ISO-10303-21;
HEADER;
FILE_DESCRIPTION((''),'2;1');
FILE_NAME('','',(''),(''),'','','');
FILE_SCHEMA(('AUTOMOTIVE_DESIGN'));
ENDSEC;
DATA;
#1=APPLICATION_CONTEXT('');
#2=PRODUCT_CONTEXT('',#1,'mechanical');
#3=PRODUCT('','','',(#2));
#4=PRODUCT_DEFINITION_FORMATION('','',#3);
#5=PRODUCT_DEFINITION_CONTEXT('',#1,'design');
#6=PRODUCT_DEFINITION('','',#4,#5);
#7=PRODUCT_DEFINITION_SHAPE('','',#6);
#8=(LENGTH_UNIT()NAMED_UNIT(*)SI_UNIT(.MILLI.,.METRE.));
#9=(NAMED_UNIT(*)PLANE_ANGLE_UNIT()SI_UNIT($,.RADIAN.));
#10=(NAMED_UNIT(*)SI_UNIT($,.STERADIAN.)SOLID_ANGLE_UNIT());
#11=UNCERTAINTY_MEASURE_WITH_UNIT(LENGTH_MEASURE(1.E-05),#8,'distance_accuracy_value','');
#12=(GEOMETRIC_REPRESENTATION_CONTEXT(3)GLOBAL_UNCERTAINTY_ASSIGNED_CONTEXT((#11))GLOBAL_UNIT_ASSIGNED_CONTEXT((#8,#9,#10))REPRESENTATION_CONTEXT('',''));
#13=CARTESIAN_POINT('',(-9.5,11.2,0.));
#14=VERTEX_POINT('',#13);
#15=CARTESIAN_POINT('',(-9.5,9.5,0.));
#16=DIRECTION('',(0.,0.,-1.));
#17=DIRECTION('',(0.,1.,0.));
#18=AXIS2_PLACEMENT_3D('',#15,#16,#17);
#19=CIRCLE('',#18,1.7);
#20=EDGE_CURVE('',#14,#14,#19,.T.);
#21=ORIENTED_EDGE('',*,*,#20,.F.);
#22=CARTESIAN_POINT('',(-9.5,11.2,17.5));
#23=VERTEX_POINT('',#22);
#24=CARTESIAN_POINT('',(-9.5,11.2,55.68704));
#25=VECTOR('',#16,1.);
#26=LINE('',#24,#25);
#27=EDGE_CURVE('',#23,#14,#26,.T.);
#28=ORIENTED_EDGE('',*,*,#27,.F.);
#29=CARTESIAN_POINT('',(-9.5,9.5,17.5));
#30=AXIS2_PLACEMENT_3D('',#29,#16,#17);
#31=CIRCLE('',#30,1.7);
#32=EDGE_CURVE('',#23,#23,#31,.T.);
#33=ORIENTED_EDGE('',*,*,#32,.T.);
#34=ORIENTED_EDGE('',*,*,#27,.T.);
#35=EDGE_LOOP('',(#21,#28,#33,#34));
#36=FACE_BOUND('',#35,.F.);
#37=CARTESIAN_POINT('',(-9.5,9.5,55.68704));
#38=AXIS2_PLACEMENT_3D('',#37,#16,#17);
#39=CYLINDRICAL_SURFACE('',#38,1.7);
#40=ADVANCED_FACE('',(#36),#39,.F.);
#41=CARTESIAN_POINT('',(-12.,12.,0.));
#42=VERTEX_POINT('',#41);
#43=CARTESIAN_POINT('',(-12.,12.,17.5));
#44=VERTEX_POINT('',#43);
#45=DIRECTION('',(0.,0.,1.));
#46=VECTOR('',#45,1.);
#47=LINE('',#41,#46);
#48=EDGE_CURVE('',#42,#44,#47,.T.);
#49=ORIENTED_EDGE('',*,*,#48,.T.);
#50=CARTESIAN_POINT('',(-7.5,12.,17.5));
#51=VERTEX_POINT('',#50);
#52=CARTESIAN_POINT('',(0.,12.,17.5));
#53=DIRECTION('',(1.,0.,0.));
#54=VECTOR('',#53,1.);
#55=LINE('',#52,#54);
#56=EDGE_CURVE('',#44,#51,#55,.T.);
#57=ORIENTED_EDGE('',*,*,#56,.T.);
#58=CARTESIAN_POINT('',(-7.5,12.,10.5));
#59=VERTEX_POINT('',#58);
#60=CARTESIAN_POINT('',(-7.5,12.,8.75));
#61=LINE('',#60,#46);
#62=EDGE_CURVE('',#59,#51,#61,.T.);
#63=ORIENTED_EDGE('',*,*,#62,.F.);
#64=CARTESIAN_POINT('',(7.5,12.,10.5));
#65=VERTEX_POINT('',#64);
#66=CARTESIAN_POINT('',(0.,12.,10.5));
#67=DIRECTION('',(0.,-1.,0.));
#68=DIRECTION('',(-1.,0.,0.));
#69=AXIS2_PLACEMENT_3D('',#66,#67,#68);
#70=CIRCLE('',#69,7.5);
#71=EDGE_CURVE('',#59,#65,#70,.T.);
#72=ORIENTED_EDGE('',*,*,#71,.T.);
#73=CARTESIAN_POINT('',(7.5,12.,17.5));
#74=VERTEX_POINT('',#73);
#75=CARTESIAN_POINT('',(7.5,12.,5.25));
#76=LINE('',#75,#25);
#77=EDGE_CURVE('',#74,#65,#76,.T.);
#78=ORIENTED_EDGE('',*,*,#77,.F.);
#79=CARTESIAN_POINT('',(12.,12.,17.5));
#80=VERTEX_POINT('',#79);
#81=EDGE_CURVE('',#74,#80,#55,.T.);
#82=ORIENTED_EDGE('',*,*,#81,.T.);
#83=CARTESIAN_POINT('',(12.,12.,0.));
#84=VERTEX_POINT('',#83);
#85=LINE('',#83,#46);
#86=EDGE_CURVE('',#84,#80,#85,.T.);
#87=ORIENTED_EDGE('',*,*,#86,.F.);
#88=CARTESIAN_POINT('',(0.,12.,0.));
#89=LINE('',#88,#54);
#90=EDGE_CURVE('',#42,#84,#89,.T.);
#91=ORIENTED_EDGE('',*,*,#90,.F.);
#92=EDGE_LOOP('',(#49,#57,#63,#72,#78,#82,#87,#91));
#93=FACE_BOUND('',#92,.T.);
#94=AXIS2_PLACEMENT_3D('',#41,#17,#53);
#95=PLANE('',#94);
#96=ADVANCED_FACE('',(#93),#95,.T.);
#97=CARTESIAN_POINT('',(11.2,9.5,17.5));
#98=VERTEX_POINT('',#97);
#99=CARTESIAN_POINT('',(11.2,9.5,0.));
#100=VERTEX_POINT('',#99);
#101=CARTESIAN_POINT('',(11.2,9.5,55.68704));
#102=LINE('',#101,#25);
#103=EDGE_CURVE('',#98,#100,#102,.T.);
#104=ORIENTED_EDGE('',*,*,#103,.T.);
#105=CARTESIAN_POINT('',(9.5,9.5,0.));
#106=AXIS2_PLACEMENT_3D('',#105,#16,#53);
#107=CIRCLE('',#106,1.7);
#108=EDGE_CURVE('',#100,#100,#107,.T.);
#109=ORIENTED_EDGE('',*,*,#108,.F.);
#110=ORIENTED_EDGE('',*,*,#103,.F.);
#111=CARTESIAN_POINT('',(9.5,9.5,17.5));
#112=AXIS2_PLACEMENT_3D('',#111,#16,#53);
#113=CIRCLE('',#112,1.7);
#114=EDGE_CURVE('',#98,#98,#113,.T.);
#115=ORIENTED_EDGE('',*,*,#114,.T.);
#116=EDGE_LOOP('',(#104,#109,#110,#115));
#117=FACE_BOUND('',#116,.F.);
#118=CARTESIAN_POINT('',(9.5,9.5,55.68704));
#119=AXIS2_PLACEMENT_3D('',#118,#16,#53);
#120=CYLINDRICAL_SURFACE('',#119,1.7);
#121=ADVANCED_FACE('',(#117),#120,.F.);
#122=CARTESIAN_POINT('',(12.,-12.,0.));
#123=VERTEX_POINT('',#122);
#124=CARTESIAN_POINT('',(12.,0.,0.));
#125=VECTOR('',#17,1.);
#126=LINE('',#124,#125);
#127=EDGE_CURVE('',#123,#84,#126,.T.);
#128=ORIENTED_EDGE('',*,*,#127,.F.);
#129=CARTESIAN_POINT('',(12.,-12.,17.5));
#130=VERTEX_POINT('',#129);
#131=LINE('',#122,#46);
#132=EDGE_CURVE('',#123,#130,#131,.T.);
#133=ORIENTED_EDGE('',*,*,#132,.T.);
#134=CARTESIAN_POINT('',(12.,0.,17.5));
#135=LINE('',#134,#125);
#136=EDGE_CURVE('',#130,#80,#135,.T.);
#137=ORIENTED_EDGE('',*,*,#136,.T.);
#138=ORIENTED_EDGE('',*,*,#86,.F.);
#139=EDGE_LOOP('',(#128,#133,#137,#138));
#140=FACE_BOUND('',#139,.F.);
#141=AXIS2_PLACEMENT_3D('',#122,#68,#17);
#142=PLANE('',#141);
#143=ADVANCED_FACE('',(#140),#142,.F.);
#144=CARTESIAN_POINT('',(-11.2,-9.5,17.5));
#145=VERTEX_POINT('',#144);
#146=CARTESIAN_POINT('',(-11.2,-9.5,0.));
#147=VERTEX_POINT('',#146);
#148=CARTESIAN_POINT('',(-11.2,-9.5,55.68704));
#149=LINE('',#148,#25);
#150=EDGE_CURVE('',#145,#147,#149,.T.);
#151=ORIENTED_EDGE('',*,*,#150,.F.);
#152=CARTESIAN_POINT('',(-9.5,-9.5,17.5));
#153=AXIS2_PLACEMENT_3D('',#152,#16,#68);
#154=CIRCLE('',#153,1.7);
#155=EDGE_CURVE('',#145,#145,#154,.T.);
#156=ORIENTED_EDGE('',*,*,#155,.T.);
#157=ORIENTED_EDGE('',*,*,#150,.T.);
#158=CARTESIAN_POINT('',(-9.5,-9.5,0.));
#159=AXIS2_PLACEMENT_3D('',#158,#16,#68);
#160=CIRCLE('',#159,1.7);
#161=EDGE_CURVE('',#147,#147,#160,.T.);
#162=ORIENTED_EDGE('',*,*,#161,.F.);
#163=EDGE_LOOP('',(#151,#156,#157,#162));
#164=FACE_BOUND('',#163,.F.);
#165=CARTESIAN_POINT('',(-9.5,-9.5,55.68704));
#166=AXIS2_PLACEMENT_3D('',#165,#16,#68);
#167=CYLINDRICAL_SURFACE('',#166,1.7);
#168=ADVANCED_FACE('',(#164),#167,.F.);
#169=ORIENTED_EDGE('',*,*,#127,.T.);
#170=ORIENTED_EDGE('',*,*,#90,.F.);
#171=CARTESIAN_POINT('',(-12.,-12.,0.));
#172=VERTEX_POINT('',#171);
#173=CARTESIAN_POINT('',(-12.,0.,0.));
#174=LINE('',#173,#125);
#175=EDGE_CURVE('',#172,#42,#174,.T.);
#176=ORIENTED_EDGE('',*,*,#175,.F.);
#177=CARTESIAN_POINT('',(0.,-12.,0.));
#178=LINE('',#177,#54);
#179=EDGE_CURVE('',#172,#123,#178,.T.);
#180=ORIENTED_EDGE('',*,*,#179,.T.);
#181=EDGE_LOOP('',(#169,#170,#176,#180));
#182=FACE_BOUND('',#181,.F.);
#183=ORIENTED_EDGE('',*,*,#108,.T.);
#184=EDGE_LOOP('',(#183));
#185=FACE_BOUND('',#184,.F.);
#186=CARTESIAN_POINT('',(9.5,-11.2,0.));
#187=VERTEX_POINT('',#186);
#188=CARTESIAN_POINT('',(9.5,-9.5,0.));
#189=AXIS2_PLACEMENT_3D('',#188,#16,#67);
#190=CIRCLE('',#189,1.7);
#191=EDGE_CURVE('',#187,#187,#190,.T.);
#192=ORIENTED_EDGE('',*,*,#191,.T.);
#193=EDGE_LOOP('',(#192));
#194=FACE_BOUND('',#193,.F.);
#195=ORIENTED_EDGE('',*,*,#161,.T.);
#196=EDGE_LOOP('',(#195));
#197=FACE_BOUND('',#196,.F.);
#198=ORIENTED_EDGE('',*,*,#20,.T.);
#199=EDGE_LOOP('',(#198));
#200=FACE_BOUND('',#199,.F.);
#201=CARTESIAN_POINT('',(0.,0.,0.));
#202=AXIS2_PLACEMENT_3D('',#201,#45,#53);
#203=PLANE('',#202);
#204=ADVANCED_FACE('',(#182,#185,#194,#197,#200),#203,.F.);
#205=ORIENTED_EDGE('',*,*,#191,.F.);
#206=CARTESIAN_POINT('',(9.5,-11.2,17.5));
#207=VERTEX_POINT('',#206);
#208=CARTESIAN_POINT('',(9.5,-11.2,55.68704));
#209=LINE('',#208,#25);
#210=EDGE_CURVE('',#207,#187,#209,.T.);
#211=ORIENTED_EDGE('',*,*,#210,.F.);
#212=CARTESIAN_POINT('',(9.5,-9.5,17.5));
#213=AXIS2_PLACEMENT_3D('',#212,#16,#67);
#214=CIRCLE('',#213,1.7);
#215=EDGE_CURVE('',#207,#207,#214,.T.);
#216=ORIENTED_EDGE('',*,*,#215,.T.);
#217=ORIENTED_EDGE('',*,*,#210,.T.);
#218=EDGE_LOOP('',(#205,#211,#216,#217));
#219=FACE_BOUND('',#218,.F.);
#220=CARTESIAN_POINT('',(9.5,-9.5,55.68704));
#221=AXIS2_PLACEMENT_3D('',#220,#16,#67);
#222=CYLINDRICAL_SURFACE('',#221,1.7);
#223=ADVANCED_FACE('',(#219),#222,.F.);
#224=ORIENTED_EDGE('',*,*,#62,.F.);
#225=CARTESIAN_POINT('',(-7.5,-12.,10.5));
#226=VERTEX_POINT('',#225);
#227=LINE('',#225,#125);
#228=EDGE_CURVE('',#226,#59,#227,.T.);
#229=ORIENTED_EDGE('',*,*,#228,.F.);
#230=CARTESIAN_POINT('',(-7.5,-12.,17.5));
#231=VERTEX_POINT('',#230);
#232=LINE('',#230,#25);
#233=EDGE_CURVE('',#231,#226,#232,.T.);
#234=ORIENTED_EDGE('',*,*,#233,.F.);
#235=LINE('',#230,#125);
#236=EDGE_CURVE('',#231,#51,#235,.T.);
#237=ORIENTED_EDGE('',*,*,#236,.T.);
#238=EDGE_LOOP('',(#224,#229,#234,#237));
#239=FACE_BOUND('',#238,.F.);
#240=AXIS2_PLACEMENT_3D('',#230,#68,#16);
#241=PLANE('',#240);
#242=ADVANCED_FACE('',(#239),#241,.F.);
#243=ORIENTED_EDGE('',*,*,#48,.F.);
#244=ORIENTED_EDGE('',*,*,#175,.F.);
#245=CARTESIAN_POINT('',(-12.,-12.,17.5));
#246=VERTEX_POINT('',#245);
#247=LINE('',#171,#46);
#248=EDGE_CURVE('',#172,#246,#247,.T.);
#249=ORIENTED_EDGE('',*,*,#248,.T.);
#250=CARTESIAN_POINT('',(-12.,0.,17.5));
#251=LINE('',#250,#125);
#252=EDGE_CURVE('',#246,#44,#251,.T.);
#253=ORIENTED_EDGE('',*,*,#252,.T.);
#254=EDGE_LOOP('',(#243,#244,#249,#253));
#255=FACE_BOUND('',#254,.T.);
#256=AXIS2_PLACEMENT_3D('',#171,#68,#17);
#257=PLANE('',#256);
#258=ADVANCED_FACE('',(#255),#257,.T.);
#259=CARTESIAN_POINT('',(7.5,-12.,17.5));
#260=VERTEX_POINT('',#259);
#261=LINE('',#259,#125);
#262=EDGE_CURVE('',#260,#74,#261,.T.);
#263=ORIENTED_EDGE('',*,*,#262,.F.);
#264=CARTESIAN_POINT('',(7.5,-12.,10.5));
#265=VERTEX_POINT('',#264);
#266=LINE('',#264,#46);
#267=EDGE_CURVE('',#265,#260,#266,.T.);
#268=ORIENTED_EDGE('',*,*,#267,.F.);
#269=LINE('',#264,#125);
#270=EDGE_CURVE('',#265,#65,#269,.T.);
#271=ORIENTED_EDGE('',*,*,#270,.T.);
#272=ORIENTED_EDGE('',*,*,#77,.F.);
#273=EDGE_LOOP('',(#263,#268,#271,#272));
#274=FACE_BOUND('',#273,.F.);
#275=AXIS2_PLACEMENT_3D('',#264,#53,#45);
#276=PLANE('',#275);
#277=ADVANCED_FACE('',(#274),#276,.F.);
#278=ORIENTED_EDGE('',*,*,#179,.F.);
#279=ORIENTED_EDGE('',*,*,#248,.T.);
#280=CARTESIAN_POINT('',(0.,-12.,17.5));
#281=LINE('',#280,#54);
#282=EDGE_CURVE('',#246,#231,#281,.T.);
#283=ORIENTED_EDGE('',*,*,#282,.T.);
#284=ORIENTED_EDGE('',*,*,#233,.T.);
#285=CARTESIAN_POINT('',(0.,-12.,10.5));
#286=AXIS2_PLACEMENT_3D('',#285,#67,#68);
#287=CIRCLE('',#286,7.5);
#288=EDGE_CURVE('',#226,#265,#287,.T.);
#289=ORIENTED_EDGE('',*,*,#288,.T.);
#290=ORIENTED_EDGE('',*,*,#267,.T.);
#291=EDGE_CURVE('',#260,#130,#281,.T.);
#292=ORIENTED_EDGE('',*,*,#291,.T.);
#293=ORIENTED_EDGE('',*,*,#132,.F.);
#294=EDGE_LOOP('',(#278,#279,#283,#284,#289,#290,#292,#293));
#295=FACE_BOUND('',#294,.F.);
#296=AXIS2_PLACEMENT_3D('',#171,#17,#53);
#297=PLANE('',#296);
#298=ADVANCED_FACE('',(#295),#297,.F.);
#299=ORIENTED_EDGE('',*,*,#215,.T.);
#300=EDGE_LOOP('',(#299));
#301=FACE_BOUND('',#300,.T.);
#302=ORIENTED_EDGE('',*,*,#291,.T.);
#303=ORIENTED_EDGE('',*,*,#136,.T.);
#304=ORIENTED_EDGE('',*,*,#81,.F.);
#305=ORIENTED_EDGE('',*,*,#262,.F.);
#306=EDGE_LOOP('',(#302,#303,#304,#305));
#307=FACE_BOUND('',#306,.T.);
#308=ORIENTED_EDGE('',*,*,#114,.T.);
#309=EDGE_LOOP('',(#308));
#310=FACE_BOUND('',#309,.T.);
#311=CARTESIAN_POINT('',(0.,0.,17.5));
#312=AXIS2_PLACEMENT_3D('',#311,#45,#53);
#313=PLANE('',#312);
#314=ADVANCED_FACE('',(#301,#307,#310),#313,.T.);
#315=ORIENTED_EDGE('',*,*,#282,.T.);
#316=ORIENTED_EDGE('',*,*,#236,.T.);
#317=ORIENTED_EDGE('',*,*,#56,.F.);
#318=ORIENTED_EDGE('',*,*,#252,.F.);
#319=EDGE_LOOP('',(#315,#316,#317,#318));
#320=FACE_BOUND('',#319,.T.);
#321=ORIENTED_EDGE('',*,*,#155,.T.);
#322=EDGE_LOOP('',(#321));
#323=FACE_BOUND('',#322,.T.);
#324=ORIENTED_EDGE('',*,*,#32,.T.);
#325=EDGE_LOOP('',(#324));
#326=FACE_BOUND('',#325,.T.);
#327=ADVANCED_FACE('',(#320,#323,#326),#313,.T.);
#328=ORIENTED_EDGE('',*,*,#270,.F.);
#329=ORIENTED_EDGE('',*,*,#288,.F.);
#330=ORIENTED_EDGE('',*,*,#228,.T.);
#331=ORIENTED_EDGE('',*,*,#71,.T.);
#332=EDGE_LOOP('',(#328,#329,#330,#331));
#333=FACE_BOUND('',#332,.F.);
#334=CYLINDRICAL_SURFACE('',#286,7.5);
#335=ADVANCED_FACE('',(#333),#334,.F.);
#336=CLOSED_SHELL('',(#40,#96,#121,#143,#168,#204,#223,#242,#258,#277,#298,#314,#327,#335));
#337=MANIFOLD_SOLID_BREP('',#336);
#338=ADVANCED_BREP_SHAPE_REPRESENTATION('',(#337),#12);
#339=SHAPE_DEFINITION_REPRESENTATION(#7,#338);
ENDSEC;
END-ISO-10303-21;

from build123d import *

# Parameters (mm, degrees)
F0_W            = 24
F0_H            = 24
F1_DEPTH        = 17.5
F3_DEPTH        = 25
F5_D            = 3.4
F5_COPIES_COUNT = 4


# Not quite as in the source:
# - a pattern or mirror of a feature is missing from the dataset's text; its kind, count and spacing are read off the source's solid


with BuildPart() as f1:
    # F0 (on Top) → F1 (new body)
    with BuildSketch(Plane.XY):
        Rectangle(F0_W, F0_H)
    extrude(amount=F1_DEPTH)

    # F2 (on face) → F3 (cut)
    with BuildSketch(Plane.XZ.offset(12)):
        with BuildLine():
            ThreePointArc((-7.5, 10.5), (0, 3), (7.5, 10.5))
            Line((7.5, 10.5), (-7.5, 10.5))
        make_face()
        with BuildLine():
            ThreePointArc((7.5, 10.5), (6.1824092402, 14.7459175671), (2.6925824036, 17.5))
            Line((2.6925824036, 17.5), (-2.6925824036, 17.5))
            ThreePointArc((-2.6925824036, 17.5), (-6.1824092402, 14.7459175671), (-7.5, 10.5))
            Line((-7.5, 10.5), (7.5, 10.5))
        make_face()
        with BuildLine():
            Line((7.5, 10.5), (7.5, 17.5))
            Line((7.5, 17.5), (2.6925824036, 17.5))
            ThreePointArc((2.6925824036, 17.5), (6.1824092402, 14.7459175671), (7.5, 10.5))
        make_face()
        with BuildLine():
            ThreePointArc((-7.5, 10.5), (-6.1824092402, 14.7459175671), (-2.6925824036, 17.5))
            Line((-2.6925824036, 17.5), (-7.5, 17.5))
            Line((-7.5, 17.5), (-7.5, 10.5))
        make_face()
    extrude(amount=-F3_DEPTH, mode=Mode.SUBTRACT)

    # F5 (through all)
    with Locations(Plane.XY.offset(17.5)):
        with Locations((-9.5, -9.5)):
            f5 = Hole(F5_D / 2)

    # F5_copies: F5 ×4 about axis
    f5_copies_axis = Axis((0, 0, 0), (0, 0, 1))
    for i in range(1, F5_COPIES_COUNT):
        add(f5.rotate(f5_copies_axis, i * 360 / F5_COPIES_COUNT), mode=Mode.SUBTRACT)


solid = f1.part
